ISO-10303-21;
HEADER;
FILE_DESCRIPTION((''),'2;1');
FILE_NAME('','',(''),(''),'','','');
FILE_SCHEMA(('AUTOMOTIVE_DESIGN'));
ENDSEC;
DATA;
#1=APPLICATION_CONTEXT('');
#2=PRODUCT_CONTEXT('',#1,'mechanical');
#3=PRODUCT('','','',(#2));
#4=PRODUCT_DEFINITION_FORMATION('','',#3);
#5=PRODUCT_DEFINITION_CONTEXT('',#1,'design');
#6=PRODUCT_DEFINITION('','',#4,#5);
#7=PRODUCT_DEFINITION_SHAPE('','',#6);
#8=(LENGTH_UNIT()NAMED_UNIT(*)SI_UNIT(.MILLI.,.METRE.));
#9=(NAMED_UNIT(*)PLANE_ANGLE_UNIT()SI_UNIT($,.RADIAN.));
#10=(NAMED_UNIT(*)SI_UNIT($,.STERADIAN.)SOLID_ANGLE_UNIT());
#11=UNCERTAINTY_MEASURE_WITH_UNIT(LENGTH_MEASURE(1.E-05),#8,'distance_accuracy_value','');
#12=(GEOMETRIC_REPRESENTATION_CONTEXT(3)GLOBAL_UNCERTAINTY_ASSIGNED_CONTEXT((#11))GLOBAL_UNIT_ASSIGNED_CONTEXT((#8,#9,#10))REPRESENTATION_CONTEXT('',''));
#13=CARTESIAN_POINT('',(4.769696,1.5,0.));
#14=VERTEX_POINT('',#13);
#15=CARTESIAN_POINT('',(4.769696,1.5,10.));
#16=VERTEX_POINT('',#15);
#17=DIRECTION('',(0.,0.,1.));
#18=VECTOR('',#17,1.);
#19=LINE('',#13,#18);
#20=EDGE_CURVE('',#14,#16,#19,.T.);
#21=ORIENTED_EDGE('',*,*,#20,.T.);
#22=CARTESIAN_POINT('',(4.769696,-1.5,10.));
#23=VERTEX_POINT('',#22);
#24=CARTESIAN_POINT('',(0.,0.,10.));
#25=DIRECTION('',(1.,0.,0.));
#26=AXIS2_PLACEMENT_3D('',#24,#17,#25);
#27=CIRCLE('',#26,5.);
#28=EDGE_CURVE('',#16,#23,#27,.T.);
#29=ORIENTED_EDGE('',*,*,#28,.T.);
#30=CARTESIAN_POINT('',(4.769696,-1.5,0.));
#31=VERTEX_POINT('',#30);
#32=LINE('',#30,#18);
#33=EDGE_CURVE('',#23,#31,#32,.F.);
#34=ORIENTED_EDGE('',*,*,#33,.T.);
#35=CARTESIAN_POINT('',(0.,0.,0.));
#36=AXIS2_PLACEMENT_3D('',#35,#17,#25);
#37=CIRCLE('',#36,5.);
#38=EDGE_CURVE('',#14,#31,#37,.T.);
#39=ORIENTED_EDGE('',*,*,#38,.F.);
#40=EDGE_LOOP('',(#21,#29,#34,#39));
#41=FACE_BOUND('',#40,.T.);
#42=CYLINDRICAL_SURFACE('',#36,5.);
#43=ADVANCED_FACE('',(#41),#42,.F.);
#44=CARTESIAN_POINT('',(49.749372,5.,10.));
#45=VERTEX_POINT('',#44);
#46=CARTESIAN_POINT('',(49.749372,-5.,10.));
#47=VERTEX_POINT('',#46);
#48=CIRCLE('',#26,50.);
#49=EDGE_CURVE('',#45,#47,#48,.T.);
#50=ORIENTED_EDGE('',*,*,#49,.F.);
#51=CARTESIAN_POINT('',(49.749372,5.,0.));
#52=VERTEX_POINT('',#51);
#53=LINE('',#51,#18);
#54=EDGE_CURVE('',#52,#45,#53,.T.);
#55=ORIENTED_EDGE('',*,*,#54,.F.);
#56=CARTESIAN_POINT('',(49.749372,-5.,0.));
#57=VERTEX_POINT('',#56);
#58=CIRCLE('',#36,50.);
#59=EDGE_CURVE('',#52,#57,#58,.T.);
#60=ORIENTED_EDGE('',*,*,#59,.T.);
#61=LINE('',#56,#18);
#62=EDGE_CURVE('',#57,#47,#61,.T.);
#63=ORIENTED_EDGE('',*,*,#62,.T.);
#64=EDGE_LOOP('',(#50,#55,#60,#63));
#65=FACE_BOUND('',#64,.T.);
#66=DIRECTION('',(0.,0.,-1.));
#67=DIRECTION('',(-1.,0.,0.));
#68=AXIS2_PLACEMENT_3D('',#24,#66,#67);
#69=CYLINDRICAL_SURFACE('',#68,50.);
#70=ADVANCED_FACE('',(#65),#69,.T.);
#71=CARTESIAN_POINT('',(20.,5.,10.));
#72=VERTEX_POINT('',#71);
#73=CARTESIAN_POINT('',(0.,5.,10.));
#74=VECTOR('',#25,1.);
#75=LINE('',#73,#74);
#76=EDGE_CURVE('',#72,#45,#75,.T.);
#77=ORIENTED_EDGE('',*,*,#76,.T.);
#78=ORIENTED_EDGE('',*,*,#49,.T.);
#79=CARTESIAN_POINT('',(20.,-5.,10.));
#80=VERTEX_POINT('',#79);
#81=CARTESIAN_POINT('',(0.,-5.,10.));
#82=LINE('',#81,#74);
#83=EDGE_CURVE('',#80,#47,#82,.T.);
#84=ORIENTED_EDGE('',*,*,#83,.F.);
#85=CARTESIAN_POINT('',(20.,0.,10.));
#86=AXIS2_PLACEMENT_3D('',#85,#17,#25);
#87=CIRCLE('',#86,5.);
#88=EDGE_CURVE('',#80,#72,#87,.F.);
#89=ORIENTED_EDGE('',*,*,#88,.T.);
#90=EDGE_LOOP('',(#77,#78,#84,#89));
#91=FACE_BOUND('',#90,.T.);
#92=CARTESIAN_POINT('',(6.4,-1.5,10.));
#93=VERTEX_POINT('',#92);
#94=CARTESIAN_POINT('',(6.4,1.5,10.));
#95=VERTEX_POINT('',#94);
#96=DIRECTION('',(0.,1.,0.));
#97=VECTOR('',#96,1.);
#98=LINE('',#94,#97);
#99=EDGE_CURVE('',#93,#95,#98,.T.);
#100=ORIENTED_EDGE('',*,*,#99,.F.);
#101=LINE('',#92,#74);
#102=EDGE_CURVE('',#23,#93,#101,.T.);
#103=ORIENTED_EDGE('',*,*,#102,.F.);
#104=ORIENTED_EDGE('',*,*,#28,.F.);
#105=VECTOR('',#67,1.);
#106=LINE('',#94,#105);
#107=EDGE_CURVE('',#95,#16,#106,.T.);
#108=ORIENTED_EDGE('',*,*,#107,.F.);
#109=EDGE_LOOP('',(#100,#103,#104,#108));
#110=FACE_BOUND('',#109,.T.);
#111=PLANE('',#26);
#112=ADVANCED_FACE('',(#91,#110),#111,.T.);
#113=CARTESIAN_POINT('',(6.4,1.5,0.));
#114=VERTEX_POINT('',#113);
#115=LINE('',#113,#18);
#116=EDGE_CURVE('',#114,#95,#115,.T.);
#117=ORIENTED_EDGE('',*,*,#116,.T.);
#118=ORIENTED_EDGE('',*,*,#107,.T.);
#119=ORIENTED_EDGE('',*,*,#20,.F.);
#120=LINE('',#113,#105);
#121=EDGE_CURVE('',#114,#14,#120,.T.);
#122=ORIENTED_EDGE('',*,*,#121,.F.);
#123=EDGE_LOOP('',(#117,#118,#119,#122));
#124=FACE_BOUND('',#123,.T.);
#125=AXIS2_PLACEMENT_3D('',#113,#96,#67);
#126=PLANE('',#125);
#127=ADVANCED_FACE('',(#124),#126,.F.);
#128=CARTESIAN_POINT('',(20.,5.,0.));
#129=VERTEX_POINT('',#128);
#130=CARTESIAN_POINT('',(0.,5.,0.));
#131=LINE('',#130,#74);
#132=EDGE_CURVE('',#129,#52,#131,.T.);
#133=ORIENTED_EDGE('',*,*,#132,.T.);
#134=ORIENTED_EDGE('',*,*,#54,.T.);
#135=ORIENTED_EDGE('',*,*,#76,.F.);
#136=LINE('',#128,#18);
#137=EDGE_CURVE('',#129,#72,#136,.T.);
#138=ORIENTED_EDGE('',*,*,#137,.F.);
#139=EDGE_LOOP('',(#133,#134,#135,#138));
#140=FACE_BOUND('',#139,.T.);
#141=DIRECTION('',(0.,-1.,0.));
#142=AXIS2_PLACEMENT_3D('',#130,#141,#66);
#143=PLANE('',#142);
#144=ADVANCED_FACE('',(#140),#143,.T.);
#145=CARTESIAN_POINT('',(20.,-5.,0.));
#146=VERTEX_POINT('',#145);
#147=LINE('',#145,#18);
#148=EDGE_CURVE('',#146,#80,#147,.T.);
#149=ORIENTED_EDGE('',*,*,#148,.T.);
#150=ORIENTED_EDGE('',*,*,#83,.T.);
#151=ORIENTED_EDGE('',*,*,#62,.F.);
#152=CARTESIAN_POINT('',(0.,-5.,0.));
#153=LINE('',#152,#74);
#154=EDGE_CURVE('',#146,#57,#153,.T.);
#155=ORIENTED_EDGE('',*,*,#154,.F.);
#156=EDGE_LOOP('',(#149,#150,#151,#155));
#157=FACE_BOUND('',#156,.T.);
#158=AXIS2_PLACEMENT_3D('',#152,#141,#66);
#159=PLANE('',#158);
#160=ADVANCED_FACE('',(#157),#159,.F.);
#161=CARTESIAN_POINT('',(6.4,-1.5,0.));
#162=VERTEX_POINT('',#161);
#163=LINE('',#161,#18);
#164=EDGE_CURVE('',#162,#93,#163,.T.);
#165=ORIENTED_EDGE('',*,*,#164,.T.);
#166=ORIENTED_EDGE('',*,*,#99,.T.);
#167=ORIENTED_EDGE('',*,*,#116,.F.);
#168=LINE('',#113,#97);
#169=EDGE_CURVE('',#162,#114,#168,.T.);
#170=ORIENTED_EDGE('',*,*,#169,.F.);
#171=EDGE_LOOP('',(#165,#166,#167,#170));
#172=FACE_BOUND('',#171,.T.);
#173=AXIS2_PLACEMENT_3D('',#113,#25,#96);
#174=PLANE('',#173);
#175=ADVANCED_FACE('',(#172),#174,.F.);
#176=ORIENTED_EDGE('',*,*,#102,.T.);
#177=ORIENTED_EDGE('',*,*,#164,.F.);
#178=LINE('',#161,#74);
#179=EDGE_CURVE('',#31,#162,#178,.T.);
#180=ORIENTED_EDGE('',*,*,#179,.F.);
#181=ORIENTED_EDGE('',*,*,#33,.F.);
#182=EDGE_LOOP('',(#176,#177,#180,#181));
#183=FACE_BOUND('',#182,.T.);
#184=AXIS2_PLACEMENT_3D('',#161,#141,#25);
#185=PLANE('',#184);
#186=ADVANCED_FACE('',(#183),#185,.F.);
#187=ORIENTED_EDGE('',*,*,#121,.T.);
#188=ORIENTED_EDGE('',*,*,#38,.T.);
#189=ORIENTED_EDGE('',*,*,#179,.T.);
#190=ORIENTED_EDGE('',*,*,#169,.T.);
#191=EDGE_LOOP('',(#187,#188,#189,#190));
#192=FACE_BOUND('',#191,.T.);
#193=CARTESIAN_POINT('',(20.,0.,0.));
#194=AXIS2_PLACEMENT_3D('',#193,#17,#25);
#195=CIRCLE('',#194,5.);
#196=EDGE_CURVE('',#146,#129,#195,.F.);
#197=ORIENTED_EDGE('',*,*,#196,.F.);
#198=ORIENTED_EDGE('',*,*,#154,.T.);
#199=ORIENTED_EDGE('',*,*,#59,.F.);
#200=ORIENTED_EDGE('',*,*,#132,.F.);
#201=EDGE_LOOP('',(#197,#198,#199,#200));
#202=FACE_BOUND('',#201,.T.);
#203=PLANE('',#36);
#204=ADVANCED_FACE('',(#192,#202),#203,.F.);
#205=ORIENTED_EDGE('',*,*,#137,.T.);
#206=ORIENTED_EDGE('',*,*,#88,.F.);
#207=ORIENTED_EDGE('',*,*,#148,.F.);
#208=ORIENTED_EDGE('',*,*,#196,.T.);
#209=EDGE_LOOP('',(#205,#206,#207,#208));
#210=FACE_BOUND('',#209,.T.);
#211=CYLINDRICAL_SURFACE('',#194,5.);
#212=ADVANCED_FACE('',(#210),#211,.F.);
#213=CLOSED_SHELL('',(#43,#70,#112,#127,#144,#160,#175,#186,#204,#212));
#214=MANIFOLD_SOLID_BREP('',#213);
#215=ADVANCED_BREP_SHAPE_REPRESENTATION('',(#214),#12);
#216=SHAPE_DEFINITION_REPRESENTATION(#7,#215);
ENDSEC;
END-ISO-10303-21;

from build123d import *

# Parameters (mm, degrees)
SKETCH_1_R               = 50
EXTRUDE_1_DEPTH          = 10
SKETCH_2_R               = 5
CUT_EXTRUDE_1_DEPTH      = 72.414284285
CUT_EXTRUDE_START        = -1.5
CUT_EXTRUDE_12_OUTLINE_W = 2.4
CUT_EXTRUDE_12_OUTLINE_H = 10
CUT_EXTRUDE_12_DEPTH     = 3
CUT_EXTRUDE_13_DEPTH     = 72.414284285


# Read off the part's stored shape, not the designer's step: 切除-拉伸12
with BuildPart() as part:
    # 草图1 → 凸台-拉伸1 (new body)
    with BuildSketch(Plane.XY):
        Circle(SKETCH_1_R)
    extrude(amount=EXTRUDE_1_DEPTH)

    # 草图2 → 切除-拉伸1 (cut, through all)
    with BuildSketch(Plane.XY.offset(10)):
        Circle(SKETCH_2_R)
    extrude(amount=-CUT_EXTRUDE_1_DEPTH, mode=Mode.SUBTRACT)

    # 切除-拉伸12 outline → 切除-拉伸12 (cut)
    with BuildSketch(Plane(origin=(0, 0, 0), x_dir=(1, 0, 0), z_dir=(0, 1, 0)).offset(CUT_EXTRUDE_START)):
        with Locations((5.2, -5)):
            Rectangle(CUT_EXTRUDE_12_OUTLINE_W, CUT_EXTRUDE_12_OUTLINE_H)
    extrude(amount=CUT_EXTRUDE_12_DEPTH, mode=Mode.SUBTRACT)

    # 草图24 → 切除-拉伸13 (cut, through all)
    with BuildSketch(Plane.XY.offset(10)):
        with BuildLine():
            Line((20, -5), (50, -5))
            ThreePointArc((50, -5), (55, 0), (50, 5))
            Line((50, 5), (20, 5))
            ThreePointArc((20, 5), (15, 0), (20, -5))
        make_face()
    extrude(amount=-CUT_EXTRUDE_13_DEPTH, mode=Mode.SUBTRACT)


solid = part.part
